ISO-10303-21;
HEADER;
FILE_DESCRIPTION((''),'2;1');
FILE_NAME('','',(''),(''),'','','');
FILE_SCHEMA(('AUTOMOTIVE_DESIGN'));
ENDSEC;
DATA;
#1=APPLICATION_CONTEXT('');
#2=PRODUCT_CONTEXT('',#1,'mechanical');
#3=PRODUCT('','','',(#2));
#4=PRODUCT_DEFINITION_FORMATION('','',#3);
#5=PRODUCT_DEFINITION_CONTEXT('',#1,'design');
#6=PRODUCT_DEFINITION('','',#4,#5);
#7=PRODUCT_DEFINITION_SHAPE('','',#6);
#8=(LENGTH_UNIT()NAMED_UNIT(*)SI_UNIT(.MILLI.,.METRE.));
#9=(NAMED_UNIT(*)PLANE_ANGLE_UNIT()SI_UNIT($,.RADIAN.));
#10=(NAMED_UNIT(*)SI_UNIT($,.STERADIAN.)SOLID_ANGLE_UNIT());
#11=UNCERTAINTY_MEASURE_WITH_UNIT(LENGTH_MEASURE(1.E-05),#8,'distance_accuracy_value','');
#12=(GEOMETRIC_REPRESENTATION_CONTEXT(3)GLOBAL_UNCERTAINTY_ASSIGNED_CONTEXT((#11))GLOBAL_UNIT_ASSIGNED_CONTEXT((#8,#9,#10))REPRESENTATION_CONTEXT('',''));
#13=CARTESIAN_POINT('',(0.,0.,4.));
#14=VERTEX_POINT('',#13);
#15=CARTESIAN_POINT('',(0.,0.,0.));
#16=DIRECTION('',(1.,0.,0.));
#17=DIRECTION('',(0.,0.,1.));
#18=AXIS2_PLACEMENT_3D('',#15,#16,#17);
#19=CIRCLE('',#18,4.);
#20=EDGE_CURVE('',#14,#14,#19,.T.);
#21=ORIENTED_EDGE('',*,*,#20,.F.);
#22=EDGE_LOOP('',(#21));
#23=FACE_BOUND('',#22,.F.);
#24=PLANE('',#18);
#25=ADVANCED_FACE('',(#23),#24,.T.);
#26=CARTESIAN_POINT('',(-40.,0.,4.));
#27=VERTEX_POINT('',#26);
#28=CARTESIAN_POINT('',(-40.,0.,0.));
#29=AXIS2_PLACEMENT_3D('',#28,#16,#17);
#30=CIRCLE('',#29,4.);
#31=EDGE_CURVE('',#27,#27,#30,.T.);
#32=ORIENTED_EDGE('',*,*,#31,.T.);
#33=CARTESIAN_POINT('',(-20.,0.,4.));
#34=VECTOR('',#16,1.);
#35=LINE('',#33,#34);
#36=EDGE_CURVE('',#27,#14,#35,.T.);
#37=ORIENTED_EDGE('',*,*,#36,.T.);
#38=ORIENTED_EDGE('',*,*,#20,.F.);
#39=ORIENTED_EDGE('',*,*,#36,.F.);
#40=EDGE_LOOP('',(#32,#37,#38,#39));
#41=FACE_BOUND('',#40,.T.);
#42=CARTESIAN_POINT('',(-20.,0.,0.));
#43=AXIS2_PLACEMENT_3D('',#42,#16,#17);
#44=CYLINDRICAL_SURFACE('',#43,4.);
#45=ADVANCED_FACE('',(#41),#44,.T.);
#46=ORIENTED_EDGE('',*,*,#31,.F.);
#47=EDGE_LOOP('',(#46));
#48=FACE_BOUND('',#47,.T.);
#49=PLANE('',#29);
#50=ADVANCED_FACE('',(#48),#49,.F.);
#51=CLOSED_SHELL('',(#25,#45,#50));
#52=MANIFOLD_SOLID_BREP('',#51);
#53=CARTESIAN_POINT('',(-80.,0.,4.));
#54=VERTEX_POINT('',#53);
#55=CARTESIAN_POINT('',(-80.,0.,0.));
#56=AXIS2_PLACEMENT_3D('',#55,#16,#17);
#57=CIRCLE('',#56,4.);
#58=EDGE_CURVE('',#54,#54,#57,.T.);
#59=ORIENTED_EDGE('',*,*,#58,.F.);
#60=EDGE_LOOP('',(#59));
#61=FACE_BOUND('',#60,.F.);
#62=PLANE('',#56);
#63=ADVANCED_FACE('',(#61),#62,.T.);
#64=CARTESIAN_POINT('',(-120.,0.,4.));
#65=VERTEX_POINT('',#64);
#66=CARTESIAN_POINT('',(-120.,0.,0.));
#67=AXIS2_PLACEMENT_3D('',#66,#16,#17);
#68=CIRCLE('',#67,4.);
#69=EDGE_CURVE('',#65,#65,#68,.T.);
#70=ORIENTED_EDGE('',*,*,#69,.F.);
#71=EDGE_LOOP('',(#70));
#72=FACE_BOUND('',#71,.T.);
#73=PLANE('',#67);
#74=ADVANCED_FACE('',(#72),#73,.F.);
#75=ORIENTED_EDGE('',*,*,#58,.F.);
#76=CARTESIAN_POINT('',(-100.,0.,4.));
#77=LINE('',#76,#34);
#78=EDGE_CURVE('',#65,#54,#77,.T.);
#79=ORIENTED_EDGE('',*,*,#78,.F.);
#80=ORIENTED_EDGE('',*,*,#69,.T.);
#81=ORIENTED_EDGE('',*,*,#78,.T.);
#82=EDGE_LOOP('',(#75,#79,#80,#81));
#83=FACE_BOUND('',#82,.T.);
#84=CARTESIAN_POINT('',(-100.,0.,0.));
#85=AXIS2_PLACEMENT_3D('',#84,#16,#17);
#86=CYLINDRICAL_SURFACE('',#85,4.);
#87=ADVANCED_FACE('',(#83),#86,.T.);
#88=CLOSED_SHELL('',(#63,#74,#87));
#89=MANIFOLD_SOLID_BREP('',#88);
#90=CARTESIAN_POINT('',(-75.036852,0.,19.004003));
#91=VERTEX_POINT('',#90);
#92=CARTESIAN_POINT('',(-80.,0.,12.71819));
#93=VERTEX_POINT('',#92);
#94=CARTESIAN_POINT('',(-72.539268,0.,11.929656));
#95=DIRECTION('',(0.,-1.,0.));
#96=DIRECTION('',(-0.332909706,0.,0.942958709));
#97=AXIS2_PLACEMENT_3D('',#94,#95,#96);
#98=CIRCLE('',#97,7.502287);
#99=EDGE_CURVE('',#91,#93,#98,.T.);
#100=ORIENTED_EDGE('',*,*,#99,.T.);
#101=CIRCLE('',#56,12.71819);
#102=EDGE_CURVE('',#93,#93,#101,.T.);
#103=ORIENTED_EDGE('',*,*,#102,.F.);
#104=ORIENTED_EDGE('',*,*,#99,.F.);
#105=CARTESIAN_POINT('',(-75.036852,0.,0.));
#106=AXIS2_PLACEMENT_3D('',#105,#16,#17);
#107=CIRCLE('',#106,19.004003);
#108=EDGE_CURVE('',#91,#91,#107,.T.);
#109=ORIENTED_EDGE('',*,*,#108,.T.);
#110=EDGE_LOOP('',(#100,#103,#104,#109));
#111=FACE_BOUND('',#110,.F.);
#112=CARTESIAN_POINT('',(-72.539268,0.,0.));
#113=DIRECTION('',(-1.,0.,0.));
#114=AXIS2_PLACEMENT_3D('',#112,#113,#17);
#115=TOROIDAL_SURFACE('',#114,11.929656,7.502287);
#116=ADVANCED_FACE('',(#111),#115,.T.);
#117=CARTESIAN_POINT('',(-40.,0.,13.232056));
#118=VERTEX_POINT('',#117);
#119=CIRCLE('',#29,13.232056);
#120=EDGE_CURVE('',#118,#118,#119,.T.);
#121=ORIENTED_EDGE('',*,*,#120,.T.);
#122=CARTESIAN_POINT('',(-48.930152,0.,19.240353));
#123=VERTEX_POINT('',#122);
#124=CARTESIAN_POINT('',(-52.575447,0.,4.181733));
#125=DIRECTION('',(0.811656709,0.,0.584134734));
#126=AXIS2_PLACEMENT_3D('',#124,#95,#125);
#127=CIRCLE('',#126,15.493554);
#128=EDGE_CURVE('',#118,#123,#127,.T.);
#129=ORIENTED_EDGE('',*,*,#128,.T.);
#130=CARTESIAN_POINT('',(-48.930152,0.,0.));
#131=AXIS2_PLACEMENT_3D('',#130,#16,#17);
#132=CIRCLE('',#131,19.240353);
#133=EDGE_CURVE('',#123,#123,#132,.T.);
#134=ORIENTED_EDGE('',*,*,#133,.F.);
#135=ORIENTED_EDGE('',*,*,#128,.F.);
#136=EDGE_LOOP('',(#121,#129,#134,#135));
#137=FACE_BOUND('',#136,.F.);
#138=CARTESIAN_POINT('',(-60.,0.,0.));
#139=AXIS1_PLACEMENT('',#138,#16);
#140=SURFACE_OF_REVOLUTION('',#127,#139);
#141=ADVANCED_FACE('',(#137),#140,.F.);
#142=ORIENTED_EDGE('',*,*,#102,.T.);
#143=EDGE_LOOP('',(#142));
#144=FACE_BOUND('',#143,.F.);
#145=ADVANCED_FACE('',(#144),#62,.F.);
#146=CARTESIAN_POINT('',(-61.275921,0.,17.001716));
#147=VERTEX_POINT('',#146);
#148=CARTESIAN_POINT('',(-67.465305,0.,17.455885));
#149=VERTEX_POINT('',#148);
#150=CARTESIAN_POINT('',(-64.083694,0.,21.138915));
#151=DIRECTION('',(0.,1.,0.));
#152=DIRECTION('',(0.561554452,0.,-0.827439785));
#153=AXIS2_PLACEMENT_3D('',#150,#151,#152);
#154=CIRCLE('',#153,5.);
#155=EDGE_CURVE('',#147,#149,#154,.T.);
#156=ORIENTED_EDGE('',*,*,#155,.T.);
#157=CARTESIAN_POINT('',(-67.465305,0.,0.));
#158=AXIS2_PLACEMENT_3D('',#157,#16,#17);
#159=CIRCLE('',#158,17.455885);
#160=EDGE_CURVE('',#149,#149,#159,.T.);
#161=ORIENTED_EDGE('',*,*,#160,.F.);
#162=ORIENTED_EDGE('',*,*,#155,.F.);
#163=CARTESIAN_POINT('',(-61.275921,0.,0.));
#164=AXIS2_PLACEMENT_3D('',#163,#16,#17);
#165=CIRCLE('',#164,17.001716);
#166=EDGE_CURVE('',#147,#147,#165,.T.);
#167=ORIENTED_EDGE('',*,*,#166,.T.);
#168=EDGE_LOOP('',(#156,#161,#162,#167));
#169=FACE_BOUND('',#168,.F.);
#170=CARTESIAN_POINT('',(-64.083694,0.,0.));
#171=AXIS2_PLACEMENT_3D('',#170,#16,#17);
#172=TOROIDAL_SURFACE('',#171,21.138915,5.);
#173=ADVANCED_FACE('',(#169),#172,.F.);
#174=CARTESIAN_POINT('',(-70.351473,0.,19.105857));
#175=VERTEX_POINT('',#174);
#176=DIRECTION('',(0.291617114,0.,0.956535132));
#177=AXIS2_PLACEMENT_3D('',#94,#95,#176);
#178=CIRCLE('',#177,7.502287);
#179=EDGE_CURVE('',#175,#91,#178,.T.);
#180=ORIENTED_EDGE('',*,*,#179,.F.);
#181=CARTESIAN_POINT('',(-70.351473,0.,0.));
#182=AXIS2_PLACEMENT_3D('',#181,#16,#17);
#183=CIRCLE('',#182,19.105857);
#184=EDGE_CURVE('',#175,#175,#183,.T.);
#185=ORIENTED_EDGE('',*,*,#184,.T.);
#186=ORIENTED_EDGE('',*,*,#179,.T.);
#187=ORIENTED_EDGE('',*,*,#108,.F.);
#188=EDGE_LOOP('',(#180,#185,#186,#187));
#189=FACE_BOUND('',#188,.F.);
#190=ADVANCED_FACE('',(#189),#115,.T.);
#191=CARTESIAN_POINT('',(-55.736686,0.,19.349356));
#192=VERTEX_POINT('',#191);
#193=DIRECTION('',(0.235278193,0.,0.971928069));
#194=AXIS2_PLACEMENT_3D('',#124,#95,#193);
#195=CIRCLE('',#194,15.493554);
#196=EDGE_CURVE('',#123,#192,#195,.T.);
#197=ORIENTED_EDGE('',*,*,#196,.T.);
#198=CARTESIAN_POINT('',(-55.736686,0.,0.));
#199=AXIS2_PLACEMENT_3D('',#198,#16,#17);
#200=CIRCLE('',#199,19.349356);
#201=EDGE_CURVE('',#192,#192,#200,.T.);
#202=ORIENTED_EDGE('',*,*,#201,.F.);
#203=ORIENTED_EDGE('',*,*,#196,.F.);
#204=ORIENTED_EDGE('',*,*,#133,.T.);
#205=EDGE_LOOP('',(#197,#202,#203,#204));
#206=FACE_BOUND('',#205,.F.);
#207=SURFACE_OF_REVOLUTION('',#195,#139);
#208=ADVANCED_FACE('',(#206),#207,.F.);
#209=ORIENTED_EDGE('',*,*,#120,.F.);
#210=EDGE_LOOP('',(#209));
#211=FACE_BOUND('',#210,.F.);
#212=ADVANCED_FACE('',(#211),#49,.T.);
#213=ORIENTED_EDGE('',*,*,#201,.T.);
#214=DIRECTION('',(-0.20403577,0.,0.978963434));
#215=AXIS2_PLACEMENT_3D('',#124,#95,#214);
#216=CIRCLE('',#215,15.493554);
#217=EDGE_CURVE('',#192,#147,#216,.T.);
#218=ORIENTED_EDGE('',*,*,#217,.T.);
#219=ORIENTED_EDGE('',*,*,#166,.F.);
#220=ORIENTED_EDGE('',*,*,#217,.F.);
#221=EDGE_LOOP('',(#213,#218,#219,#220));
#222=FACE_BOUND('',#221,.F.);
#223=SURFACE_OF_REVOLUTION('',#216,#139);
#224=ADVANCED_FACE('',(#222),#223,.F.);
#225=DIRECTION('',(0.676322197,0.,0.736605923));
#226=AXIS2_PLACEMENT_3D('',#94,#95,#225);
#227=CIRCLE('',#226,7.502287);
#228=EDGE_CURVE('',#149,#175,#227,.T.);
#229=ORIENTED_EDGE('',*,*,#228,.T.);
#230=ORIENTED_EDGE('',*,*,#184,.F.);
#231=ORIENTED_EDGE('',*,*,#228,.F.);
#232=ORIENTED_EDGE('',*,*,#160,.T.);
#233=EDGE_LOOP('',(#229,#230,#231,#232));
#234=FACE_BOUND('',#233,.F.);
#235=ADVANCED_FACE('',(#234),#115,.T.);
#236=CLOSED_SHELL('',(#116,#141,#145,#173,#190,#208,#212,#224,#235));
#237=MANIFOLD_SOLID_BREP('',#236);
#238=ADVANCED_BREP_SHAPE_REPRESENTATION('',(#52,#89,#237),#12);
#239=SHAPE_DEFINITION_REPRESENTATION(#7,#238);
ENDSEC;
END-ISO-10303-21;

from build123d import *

# Parameters (mm, degrees)
F0_W = 40
F0_H = 4


# Not quite as in the source:
# - a feature names something its author has since deleted; it is built from what else it names
# - the program builds the solid bodies; features that only make, move or delete a surface that nothing else refers to are left out


with BuildPart() as f1:
    # F0 (on Front) → F1 (revolve)
    with BuildSketch(Plane.XZ):
        with Locations((-60, 2)):
            Rectangle(F0_W, F0_H)
        with BuildLine():
            Line((-80, 12.7181895077), (-80, 4))
            Line((-80, 4), (-40, 4))
            Line((-40, 4), (-40, 13.2320560515))
            ThreePointArc((-40, 13.2320560515), (-43.9265726053, 17.0365837136), (-48.9301517038, 19.2403530667))
            ThreePointArc((-48.9301517038, 19.2403530667), (-52.3273584241, 19.6733006707), (-55.7366863479, 19.3493558663))
            ThreePointArc((-55.7366863479, 19.3493558663), (-58.6213477942, 18.4469810503), (-61.2759213851, 17.0017160163))
            ThreePointArc((-61.2759213851, 17.0017160163), (-64.4496036892, 16.152321931), (-67.4653046291, 17.4558853242))
            ThreePointArc((-67.4653046291, 17.4558853242), (-68.8158438678, 18.4427526295), (-70.3514725459, 19.1058573548))
            ThreePointArc((-70.3514725459, 19.1058573548), (-72.7023195146, 19.4301712071), (-75.0368519562, 19.0040031361))
            ThreePointArc((-75.0368519562, 19.0040031361), (-78.4273812016, 16.5787885104), (-80, 12.7181895077))
        make_face()
    revolve(axis=Axis((-60, 0, 0), (1, 0, 0)))


with BuildPart() as f2:
    # F0 (on Front) → F2 (revolve)
    with BuildSketch(Plane.XZ):
        with Locations((-100, 2)):
            Rectangle(F0_W, F0_H)
    revolve(axis=Axis((-60, 0, 0), (1, 0, 0)))


with BuildPart() as f2b:
    # F0 (on Front) → F2, piece 2 (revolve)
    with BuildSketch(Plane.XZ):
        with Locations((-20, 2)):
            Rectangle(F0_W, F0_H)
    revolve(axis=Axis((-60, 0, 0), (1, 0, 0)))


solid = Compound([f1.part, f2.part, f2b.part])
